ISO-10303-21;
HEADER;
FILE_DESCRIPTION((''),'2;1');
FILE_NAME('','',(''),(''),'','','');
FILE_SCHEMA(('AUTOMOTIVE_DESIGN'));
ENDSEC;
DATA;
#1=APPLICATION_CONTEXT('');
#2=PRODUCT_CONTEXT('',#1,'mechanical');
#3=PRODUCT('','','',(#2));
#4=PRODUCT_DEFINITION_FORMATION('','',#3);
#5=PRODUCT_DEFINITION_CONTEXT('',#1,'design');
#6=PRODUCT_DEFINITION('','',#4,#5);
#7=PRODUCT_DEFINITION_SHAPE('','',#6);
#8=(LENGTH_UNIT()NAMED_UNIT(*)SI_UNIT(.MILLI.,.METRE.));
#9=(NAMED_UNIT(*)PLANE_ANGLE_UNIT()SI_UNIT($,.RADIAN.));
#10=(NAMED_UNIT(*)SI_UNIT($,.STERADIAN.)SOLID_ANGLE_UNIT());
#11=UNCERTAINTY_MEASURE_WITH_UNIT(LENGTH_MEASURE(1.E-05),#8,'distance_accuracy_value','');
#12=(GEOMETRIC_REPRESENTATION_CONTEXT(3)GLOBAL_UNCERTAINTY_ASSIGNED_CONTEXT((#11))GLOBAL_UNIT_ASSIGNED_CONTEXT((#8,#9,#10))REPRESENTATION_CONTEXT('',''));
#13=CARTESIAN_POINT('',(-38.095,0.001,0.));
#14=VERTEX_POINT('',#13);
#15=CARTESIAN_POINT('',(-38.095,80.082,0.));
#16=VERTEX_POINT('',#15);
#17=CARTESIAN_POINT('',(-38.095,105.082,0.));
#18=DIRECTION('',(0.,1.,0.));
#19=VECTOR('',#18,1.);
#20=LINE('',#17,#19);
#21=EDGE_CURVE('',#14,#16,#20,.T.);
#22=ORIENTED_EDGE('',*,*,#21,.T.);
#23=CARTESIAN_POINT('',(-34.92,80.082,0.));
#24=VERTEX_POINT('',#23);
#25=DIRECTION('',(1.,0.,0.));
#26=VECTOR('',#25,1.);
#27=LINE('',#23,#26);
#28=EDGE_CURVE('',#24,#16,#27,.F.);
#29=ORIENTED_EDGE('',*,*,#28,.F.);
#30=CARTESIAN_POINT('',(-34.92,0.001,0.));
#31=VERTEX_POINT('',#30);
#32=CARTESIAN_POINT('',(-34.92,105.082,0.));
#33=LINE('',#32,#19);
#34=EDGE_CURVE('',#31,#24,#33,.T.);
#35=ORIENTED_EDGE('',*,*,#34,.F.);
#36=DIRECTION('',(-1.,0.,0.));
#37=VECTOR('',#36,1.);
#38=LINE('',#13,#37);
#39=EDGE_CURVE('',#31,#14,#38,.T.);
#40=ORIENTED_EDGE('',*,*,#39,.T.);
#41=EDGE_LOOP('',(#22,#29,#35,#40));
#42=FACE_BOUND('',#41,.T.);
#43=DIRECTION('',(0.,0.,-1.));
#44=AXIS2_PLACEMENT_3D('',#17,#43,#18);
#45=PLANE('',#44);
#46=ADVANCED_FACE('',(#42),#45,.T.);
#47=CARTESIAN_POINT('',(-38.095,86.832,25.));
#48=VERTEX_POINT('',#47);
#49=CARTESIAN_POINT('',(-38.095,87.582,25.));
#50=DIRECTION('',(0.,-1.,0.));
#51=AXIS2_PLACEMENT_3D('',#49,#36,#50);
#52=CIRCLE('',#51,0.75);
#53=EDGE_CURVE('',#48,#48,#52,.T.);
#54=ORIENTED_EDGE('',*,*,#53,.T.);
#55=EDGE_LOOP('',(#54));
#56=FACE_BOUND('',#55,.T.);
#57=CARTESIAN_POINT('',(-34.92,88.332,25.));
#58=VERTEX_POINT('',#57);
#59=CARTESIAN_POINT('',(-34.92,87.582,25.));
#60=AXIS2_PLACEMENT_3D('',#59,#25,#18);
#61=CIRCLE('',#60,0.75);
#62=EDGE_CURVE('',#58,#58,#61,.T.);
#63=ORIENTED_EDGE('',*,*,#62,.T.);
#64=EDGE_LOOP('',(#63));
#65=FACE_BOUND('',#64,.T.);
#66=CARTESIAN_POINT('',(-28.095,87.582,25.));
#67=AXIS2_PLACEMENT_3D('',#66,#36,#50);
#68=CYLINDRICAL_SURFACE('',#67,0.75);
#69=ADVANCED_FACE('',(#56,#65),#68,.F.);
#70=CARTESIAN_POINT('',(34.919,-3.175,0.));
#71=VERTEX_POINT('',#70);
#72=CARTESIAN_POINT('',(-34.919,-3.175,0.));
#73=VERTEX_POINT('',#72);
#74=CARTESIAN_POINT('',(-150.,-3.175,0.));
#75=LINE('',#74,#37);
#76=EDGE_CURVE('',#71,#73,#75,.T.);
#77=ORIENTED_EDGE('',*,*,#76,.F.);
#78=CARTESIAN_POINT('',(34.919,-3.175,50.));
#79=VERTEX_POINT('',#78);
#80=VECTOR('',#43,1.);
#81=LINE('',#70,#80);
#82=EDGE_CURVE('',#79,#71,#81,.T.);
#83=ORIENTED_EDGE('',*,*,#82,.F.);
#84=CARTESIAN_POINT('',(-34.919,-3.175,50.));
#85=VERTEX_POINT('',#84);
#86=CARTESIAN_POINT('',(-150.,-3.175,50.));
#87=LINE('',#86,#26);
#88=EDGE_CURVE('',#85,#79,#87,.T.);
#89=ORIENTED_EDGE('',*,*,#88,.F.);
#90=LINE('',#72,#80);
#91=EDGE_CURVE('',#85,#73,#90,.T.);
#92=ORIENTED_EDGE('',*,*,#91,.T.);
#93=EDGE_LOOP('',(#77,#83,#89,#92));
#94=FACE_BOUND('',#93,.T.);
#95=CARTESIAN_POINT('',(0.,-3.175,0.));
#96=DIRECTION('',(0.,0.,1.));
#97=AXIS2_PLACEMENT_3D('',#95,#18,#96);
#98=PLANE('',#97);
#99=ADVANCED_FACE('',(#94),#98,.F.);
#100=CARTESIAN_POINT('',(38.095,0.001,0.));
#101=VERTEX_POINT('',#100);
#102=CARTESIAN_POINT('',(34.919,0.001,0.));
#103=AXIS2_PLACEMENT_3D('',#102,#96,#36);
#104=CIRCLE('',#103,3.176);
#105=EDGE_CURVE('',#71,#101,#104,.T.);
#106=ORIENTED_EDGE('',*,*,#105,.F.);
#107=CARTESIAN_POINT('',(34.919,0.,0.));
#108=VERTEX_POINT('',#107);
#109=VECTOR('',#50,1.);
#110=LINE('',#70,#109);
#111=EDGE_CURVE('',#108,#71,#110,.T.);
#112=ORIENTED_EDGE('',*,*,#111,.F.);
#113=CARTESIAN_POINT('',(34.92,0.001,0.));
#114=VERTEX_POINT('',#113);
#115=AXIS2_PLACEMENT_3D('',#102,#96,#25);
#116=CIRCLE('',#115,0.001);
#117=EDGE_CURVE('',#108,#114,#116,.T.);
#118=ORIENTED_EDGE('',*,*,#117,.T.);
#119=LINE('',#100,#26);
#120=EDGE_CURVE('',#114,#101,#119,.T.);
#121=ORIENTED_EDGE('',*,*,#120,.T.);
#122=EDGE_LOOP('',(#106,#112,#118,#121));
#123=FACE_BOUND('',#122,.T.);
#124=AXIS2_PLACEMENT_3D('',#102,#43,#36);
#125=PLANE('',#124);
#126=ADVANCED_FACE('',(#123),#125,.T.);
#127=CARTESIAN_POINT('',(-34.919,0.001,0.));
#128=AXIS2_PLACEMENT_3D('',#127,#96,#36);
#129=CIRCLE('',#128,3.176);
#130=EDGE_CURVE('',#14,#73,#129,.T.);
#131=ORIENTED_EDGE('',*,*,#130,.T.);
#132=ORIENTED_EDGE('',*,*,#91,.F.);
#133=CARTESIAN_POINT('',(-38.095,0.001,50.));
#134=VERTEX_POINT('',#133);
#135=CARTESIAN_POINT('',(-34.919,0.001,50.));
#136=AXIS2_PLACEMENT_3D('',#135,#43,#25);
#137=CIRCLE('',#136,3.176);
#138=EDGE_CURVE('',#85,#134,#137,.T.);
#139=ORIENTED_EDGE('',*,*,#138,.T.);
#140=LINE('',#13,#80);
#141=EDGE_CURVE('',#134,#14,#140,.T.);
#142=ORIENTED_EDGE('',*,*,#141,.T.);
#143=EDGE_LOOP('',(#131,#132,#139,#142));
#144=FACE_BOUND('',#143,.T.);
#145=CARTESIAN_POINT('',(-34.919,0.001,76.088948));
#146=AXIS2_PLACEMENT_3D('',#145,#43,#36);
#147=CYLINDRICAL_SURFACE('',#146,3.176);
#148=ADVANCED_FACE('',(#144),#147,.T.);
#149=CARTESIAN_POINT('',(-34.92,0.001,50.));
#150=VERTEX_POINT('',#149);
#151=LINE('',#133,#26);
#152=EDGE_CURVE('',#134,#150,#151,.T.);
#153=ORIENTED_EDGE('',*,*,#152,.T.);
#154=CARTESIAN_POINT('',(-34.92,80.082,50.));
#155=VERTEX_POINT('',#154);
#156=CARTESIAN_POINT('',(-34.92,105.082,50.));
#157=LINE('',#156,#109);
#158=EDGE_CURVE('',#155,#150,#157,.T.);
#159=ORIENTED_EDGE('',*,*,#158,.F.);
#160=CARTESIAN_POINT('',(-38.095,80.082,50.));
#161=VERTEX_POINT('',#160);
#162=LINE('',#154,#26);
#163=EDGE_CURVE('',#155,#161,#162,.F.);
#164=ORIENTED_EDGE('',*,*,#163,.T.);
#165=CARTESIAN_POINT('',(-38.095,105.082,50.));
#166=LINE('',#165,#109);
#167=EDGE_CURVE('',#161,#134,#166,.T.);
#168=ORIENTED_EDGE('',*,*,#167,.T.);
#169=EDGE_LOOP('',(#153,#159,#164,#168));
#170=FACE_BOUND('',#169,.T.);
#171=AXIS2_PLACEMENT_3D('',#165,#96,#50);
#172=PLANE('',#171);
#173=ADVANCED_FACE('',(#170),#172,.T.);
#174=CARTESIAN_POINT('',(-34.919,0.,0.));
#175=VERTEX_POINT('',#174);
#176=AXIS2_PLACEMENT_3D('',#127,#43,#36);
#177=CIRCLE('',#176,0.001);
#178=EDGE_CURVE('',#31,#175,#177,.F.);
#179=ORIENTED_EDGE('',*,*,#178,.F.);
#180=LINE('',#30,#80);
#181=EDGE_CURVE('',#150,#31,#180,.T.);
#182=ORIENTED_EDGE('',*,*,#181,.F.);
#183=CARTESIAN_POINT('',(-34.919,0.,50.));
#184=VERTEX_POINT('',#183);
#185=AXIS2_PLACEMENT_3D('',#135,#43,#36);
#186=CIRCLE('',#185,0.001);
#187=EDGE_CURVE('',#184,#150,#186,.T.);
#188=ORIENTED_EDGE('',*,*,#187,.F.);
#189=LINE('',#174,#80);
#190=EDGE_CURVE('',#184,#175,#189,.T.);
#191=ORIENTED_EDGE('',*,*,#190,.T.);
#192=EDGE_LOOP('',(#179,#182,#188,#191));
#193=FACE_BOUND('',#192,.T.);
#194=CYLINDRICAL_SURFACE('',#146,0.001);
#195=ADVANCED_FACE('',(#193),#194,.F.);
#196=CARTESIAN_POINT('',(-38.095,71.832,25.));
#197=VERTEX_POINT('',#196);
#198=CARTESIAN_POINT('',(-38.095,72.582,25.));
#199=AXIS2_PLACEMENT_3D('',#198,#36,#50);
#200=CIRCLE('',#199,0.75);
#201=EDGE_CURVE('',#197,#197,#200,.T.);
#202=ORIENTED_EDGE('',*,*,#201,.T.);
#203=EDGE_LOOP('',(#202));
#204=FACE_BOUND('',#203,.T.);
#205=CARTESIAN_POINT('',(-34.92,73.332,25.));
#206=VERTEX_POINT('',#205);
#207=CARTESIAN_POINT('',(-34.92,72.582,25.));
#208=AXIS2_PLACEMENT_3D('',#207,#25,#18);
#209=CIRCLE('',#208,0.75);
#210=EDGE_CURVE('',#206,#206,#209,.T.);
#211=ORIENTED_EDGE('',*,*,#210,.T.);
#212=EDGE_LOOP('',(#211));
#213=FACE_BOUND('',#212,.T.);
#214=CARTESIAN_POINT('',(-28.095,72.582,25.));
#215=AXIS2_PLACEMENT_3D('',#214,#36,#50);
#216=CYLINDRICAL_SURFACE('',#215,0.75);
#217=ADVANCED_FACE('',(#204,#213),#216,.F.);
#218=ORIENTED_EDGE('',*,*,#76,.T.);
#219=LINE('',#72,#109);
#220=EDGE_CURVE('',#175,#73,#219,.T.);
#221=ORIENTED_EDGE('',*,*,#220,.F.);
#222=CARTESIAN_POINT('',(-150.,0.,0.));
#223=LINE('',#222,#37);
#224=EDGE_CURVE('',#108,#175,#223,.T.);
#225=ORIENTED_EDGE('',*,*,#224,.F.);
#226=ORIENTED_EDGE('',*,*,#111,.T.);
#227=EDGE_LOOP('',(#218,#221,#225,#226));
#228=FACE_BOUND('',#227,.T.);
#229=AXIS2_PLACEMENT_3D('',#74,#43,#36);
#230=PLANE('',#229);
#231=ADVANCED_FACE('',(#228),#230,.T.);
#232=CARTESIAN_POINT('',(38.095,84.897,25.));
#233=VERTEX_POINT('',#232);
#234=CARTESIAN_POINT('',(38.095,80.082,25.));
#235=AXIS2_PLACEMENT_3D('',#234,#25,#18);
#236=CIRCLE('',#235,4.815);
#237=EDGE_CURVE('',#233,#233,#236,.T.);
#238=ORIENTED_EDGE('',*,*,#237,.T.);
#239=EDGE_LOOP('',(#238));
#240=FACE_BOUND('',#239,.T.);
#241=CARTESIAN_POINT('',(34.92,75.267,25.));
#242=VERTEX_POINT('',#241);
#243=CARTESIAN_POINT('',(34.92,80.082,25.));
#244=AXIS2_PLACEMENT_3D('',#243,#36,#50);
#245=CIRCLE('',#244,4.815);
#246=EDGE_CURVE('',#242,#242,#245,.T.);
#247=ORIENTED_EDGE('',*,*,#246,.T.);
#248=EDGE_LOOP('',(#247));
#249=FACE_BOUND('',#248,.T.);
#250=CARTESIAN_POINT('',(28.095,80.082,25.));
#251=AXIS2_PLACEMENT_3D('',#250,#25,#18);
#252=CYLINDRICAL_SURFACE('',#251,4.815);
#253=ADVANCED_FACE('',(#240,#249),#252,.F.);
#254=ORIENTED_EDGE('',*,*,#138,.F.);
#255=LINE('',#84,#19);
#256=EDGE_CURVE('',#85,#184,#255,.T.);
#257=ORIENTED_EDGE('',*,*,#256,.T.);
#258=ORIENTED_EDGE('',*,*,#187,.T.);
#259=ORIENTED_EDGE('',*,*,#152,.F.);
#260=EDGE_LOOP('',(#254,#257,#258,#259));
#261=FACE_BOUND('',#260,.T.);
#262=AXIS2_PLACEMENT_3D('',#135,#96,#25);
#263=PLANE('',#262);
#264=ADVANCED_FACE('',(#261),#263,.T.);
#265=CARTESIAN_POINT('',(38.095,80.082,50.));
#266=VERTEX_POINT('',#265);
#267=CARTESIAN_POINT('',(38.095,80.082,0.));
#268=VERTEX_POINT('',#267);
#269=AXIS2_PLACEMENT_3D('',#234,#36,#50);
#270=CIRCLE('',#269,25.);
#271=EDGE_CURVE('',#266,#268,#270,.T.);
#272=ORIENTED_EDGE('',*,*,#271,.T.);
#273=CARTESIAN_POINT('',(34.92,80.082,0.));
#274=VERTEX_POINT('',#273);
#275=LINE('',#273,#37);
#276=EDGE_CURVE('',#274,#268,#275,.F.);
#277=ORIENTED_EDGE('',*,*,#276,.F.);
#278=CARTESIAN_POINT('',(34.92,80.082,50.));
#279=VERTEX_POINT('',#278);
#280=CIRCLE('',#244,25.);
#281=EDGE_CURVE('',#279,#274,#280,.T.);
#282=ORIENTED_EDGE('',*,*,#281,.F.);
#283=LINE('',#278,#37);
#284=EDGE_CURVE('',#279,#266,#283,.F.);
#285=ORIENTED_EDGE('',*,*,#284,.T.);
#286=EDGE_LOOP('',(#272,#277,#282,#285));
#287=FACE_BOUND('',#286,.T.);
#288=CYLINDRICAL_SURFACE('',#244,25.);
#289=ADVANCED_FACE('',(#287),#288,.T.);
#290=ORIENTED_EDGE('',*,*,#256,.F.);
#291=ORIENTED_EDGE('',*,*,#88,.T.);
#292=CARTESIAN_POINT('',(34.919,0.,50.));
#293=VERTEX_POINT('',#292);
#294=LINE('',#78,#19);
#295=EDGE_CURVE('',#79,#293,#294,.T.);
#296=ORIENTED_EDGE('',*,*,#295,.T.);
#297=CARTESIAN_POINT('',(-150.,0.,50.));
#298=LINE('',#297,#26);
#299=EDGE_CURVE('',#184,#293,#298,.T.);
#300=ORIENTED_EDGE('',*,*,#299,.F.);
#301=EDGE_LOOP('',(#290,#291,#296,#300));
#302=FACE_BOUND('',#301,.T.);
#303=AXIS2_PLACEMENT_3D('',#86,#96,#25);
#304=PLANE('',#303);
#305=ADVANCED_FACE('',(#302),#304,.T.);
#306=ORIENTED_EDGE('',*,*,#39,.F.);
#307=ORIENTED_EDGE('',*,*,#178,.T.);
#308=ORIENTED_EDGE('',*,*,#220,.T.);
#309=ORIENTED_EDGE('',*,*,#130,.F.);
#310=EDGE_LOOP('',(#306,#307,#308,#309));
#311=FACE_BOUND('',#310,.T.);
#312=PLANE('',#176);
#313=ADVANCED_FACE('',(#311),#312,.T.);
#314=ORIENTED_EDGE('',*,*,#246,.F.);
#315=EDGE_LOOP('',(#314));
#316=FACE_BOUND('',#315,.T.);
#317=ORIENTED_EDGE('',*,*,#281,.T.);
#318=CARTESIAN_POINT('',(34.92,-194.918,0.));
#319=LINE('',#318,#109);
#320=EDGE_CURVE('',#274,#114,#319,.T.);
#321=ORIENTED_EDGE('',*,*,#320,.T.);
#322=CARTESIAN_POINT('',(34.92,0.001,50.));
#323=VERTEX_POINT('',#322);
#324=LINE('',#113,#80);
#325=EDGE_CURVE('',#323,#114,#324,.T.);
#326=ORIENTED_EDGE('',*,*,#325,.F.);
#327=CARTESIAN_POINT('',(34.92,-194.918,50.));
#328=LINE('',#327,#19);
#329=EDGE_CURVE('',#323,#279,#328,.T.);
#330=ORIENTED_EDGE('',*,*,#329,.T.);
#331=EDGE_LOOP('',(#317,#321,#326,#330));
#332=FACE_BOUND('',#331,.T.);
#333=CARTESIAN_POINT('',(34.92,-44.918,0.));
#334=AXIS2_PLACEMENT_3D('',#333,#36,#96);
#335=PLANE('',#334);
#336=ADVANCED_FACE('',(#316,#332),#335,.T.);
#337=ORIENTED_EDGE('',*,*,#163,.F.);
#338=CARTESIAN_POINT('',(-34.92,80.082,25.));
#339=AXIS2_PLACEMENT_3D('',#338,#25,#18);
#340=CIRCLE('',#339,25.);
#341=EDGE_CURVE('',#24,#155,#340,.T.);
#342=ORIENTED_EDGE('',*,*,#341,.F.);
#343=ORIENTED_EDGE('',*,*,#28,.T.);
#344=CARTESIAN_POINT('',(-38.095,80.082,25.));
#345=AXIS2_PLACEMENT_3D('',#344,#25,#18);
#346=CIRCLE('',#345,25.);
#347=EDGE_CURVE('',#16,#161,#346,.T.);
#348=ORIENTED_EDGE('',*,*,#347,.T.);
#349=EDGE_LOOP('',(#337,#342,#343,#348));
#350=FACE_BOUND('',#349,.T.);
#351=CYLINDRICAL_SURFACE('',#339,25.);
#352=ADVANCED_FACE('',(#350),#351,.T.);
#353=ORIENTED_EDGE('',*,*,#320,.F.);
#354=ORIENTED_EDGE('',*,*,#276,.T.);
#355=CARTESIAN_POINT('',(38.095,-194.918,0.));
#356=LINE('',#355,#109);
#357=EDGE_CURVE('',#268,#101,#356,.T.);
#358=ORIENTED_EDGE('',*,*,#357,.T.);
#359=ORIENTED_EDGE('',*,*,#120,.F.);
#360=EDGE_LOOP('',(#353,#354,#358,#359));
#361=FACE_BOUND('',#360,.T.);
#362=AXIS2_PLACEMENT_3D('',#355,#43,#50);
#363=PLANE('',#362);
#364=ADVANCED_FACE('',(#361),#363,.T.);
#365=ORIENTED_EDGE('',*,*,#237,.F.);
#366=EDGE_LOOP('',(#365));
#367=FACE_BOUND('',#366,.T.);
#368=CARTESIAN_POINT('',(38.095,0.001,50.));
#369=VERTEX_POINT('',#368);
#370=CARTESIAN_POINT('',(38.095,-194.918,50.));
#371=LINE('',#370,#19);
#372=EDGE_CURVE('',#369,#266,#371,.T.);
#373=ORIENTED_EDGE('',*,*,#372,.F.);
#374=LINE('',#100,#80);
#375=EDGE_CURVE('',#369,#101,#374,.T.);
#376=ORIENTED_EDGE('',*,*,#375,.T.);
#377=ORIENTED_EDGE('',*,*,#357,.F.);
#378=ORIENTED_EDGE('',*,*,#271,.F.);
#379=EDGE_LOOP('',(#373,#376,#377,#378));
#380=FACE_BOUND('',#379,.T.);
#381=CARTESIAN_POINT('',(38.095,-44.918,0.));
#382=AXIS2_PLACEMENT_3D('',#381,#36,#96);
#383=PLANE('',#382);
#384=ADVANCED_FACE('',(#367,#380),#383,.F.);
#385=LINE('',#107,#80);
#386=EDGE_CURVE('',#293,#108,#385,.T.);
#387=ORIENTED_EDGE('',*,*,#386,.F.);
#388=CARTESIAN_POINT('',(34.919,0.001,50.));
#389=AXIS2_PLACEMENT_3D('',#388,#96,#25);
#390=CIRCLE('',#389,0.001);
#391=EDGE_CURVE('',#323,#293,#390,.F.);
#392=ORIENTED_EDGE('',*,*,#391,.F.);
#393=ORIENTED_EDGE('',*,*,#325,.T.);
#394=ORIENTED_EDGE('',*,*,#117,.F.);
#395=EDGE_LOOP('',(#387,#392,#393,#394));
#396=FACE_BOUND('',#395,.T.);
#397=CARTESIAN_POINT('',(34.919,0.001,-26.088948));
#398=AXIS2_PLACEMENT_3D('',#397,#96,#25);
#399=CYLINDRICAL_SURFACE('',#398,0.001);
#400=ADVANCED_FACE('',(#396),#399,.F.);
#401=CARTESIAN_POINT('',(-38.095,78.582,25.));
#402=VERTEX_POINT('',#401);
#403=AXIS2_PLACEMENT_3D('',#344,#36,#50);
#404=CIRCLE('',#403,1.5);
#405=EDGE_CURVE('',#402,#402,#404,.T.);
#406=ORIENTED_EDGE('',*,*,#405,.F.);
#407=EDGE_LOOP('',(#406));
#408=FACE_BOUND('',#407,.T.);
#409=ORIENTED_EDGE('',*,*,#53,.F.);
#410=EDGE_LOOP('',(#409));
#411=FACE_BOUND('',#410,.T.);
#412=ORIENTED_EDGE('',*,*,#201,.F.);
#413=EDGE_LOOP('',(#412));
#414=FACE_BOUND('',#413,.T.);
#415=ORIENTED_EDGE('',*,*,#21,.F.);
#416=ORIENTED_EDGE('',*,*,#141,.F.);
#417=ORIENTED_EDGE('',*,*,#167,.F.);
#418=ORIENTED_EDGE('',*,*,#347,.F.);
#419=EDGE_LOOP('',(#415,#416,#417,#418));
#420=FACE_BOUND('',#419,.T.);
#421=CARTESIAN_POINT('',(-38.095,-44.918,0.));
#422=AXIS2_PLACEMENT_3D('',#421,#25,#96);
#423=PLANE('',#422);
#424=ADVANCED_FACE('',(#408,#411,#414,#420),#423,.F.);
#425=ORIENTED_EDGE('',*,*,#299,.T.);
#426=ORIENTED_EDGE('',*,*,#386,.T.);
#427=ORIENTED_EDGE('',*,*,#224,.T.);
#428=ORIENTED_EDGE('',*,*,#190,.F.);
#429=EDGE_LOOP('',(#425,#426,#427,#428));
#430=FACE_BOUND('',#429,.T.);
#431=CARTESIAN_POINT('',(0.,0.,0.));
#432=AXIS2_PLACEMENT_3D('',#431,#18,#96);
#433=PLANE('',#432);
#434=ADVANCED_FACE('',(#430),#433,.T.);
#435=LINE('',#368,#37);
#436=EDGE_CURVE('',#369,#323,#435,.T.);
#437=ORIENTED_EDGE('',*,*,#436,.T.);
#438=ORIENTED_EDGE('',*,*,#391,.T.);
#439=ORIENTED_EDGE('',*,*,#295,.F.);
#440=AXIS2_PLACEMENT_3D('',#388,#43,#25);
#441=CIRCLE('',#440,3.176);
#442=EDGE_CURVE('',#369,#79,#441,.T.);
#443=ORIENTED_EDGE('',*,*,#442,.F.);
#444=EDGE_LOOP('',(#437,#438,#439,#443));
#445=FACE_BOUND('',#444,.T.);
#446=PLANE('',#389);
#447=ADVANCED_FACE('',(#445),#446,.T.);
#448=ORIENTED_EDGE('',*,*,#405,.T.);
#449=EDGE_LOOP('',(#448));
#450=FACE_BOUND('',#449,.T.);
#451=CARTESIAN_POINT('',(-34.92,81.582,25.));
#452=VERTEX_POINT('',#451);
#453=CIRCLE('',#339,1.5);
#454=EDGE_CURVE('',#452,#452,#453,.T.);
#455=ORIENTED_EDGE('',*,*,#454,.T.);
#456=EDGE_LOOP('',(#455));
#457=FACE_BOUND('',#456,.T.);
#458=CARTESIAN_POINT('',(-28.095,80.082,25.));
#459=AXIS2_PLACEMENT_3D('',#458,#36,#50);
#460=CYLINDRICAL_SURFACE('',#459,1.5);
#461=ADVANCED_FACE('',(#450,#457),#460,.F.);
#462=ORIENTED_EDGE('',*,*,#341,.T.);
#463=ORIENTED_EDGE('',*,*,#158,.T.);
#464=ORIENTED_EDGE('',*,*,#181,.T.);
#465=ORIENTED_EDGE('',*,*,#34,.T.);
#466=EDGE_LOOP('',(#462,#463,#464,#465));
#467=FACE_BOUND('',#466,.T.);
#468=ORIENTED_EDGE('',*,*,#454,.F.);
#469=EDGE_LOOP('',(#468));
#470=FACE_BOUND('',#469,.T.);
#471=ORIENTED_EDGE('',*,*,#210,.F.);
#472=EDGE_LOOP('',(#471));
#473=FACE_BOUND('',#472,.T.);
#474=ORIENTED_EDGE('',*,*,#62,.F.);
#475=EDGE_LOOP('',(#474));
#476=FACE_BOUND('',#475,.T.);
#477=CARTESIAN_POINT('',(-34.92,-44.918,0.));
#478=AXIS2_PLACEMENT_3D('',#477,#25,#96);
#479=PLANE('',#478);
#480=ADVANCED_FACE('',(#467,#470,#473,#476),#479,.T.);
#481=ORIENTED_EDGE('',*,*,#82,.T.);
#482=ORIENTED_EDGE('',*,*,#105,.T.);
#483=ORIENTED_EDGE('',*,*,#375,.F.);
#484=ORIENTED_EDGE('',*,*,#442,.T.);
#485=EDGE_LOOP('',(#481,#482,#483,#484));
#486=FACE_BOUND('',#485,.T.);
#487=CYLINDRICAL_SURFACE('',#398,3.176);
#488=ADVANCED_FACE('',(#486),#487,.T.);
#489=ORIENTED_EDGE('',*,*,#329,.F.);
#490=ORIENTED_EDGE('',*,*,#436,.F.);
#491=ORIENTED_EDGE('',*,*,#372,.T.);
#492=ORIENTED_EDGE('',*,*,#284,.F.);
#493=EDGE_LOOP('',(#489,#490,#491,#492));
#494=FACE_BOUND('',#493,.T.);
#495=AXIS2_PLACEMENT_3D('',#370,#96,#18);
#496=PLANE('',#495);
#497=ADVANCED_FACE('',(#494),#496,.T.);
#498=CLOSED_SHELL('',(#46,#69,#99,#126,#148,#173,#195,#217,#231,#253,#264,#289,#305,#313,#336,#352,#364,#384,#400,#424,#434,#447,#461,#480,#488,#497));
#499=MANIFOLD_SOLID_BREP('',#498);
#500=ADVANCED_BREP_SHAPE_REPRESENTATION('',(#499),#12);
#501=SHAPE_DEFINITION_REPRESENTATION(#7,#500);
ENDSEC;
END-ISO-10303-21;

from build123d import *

# Parameters (mm, degrees)
SKETCH1_W              = 300
SKETCH1_H              = 50
BASE_FLANGE1_DEPTH     = 3.175
SKETCHED_BEND2_DEPTH   = 50
SKETCHED_BEND2_2_DEPTH = 50
SKETCH7_R              = 4.815
CUT_EXTRUDE1_DEPTH     = 10
SKETCH8_R              = 1.5
SKETCH8_R_2            = 0.75
CUT_EXTRUDE2_DEPTH     = 10
CUT_EXTRUDE3_DEPTH     = 140.094007146


# Read off the part's stored shape, not the designer's step: Sketched Bend2
# Sheet-metal steps are written as plain solids
with BuildPart() as part:
    # Sketch1 → Base-Flange1 (new body)
    with BuildSketch(Plane(origin=(0, 0, 0), x_dir=(1, 0, 0), z_dir=(0, 1, 0))):
        with Locations((0, -25)):
            Rectangle(SKETCH1_W, SKETCH1_H)
    extrude(amount=-BASE_FLANGE1_DEPTH)

    # Sketched Bend2 outline → Sketched Bend2 (cut)
    with BuildSketch(Plane.XY):
        with BuildLine():
            Line((-150, -3.175), (-34.919, -3.175))
            ThreePointArc((-34.919, -3.175), (-37.164417556, -2.245124663), (-38.094999843, 0))
            Line((-38.094999843, 0), (-150, 0))
            Line((-150, 0), (-150, -3.175))
        make_face()
        with BuildLine():
            ThreePointArc((38.094999843, 0), (37.164417556, -2.245124663), (34.919, -3.175))
            Line((34.919, -3.175), (150, -3.175))
            Line((150, -3.175), (150, 0))
            Line((150, 0), (38.094999843, 0))
        make_face()
    extrude(amount=SKETCHED_BEND2_DEPTH, mode=Mode.SUBTRACT)

    # Sketched Bend2 2 outline → Sketched Bend2 2 (add)
    with BuildSketch(Plane.XY):
        with BuildLine():
            ThreePointArc((-38.095, 0.001), (-38.094999961, 0.0005), (-38.094999843, 0))
            Line((-38.094999843, 0), (-34.919, 0))
            ThreePointArc((-34.919, 0), (-34.919707107, 0.000292893), (-34.92, 0.001))
            Line((-34.92, 0.001), (-34.92, 105.082))
            Line((-34.92, 105.082), (-38.095, 105.082))
            Line((-38.095, 105.082), (-38.095, 0.001))
        make_face()
        with BuildLine():
            Line((34.919, 0), (38.094999843, 0))
            ThreePointArc((38.094999843, 0), (38.094999961, 0.0005), (38.095, 0.001))
            Line((38.095, 0.001), (38.095, 105.082))
            Line((38.095, 105.082), (34.92, 105.082))
            Line((34.92, 105.082), (34.92, 0.001))
            ThreePointArc((34.92, 0.001), (34.919707107, 0.000292893), (34.919, 0))
        make_face()
    extrude(amount=SKETCHED_BEND2_2_DEPTH)

    # Sketch7 → Cut-Extrude1 (cut)
    with BuildSketch(Plane(origin=(38.095, 0, 0), x_dir=(0, 0, -1), z_dir=(1, 0, 0))):
        with Locations(Location((-25, 80.082, 0), (0, 0, 90))):
            Circle(SKETCH7_R)
    extrude(amount=-CUT_EXTRUDE1_DEPTH, mode=Mode.SUBTRACT)

    # Sketch8 → Cut-Extrude2 (cut)
    with BuildSketch(Plane.ZY.offset(38.095)):
        with Locations(Location((25, 80.082, 0), (0, 0, 270))):
            Circle(SKETCH8_R)
        with Locations(Location((25, 87.582, 0), (0, 0, 270))):
            Circle(SKETCH8_R_2)
        with Locations(Location((25, 72.582, 0), (0, 0, 270))):
            Circle(SKETCH8_R_2)
    extrude(amount=-CUT_EXTRUDE2_DEPTH, mode=Mode.SUBTRACT)

    # Sketch9 → Cut-Extrude3 (cut, through all)
    with BuildSketch(Plane.ZY.offset(38.095)):
        with BuildLine():
            Line((0, 105.082), (0, 80.082))
            ThreePointArc((0, 80.082), (7.32233047, 97.75966953), (25, 105.082))
            Line((25, 105.082), (0, 105.082))
        make_face()
        with BuildLine():
            ThreePointArc((25, 105.082), (42.67766953, 97.75966953), (50, 80.082))
            Line((50, 80.082), (50, 105.082))
            Line((50, 105.082), (25, 105.082))
        make_face()
    extrude(amount=-CUT_EXTRUDE3_DEPTH, mode=Mode.SUBTRACT)


solid = part.part
